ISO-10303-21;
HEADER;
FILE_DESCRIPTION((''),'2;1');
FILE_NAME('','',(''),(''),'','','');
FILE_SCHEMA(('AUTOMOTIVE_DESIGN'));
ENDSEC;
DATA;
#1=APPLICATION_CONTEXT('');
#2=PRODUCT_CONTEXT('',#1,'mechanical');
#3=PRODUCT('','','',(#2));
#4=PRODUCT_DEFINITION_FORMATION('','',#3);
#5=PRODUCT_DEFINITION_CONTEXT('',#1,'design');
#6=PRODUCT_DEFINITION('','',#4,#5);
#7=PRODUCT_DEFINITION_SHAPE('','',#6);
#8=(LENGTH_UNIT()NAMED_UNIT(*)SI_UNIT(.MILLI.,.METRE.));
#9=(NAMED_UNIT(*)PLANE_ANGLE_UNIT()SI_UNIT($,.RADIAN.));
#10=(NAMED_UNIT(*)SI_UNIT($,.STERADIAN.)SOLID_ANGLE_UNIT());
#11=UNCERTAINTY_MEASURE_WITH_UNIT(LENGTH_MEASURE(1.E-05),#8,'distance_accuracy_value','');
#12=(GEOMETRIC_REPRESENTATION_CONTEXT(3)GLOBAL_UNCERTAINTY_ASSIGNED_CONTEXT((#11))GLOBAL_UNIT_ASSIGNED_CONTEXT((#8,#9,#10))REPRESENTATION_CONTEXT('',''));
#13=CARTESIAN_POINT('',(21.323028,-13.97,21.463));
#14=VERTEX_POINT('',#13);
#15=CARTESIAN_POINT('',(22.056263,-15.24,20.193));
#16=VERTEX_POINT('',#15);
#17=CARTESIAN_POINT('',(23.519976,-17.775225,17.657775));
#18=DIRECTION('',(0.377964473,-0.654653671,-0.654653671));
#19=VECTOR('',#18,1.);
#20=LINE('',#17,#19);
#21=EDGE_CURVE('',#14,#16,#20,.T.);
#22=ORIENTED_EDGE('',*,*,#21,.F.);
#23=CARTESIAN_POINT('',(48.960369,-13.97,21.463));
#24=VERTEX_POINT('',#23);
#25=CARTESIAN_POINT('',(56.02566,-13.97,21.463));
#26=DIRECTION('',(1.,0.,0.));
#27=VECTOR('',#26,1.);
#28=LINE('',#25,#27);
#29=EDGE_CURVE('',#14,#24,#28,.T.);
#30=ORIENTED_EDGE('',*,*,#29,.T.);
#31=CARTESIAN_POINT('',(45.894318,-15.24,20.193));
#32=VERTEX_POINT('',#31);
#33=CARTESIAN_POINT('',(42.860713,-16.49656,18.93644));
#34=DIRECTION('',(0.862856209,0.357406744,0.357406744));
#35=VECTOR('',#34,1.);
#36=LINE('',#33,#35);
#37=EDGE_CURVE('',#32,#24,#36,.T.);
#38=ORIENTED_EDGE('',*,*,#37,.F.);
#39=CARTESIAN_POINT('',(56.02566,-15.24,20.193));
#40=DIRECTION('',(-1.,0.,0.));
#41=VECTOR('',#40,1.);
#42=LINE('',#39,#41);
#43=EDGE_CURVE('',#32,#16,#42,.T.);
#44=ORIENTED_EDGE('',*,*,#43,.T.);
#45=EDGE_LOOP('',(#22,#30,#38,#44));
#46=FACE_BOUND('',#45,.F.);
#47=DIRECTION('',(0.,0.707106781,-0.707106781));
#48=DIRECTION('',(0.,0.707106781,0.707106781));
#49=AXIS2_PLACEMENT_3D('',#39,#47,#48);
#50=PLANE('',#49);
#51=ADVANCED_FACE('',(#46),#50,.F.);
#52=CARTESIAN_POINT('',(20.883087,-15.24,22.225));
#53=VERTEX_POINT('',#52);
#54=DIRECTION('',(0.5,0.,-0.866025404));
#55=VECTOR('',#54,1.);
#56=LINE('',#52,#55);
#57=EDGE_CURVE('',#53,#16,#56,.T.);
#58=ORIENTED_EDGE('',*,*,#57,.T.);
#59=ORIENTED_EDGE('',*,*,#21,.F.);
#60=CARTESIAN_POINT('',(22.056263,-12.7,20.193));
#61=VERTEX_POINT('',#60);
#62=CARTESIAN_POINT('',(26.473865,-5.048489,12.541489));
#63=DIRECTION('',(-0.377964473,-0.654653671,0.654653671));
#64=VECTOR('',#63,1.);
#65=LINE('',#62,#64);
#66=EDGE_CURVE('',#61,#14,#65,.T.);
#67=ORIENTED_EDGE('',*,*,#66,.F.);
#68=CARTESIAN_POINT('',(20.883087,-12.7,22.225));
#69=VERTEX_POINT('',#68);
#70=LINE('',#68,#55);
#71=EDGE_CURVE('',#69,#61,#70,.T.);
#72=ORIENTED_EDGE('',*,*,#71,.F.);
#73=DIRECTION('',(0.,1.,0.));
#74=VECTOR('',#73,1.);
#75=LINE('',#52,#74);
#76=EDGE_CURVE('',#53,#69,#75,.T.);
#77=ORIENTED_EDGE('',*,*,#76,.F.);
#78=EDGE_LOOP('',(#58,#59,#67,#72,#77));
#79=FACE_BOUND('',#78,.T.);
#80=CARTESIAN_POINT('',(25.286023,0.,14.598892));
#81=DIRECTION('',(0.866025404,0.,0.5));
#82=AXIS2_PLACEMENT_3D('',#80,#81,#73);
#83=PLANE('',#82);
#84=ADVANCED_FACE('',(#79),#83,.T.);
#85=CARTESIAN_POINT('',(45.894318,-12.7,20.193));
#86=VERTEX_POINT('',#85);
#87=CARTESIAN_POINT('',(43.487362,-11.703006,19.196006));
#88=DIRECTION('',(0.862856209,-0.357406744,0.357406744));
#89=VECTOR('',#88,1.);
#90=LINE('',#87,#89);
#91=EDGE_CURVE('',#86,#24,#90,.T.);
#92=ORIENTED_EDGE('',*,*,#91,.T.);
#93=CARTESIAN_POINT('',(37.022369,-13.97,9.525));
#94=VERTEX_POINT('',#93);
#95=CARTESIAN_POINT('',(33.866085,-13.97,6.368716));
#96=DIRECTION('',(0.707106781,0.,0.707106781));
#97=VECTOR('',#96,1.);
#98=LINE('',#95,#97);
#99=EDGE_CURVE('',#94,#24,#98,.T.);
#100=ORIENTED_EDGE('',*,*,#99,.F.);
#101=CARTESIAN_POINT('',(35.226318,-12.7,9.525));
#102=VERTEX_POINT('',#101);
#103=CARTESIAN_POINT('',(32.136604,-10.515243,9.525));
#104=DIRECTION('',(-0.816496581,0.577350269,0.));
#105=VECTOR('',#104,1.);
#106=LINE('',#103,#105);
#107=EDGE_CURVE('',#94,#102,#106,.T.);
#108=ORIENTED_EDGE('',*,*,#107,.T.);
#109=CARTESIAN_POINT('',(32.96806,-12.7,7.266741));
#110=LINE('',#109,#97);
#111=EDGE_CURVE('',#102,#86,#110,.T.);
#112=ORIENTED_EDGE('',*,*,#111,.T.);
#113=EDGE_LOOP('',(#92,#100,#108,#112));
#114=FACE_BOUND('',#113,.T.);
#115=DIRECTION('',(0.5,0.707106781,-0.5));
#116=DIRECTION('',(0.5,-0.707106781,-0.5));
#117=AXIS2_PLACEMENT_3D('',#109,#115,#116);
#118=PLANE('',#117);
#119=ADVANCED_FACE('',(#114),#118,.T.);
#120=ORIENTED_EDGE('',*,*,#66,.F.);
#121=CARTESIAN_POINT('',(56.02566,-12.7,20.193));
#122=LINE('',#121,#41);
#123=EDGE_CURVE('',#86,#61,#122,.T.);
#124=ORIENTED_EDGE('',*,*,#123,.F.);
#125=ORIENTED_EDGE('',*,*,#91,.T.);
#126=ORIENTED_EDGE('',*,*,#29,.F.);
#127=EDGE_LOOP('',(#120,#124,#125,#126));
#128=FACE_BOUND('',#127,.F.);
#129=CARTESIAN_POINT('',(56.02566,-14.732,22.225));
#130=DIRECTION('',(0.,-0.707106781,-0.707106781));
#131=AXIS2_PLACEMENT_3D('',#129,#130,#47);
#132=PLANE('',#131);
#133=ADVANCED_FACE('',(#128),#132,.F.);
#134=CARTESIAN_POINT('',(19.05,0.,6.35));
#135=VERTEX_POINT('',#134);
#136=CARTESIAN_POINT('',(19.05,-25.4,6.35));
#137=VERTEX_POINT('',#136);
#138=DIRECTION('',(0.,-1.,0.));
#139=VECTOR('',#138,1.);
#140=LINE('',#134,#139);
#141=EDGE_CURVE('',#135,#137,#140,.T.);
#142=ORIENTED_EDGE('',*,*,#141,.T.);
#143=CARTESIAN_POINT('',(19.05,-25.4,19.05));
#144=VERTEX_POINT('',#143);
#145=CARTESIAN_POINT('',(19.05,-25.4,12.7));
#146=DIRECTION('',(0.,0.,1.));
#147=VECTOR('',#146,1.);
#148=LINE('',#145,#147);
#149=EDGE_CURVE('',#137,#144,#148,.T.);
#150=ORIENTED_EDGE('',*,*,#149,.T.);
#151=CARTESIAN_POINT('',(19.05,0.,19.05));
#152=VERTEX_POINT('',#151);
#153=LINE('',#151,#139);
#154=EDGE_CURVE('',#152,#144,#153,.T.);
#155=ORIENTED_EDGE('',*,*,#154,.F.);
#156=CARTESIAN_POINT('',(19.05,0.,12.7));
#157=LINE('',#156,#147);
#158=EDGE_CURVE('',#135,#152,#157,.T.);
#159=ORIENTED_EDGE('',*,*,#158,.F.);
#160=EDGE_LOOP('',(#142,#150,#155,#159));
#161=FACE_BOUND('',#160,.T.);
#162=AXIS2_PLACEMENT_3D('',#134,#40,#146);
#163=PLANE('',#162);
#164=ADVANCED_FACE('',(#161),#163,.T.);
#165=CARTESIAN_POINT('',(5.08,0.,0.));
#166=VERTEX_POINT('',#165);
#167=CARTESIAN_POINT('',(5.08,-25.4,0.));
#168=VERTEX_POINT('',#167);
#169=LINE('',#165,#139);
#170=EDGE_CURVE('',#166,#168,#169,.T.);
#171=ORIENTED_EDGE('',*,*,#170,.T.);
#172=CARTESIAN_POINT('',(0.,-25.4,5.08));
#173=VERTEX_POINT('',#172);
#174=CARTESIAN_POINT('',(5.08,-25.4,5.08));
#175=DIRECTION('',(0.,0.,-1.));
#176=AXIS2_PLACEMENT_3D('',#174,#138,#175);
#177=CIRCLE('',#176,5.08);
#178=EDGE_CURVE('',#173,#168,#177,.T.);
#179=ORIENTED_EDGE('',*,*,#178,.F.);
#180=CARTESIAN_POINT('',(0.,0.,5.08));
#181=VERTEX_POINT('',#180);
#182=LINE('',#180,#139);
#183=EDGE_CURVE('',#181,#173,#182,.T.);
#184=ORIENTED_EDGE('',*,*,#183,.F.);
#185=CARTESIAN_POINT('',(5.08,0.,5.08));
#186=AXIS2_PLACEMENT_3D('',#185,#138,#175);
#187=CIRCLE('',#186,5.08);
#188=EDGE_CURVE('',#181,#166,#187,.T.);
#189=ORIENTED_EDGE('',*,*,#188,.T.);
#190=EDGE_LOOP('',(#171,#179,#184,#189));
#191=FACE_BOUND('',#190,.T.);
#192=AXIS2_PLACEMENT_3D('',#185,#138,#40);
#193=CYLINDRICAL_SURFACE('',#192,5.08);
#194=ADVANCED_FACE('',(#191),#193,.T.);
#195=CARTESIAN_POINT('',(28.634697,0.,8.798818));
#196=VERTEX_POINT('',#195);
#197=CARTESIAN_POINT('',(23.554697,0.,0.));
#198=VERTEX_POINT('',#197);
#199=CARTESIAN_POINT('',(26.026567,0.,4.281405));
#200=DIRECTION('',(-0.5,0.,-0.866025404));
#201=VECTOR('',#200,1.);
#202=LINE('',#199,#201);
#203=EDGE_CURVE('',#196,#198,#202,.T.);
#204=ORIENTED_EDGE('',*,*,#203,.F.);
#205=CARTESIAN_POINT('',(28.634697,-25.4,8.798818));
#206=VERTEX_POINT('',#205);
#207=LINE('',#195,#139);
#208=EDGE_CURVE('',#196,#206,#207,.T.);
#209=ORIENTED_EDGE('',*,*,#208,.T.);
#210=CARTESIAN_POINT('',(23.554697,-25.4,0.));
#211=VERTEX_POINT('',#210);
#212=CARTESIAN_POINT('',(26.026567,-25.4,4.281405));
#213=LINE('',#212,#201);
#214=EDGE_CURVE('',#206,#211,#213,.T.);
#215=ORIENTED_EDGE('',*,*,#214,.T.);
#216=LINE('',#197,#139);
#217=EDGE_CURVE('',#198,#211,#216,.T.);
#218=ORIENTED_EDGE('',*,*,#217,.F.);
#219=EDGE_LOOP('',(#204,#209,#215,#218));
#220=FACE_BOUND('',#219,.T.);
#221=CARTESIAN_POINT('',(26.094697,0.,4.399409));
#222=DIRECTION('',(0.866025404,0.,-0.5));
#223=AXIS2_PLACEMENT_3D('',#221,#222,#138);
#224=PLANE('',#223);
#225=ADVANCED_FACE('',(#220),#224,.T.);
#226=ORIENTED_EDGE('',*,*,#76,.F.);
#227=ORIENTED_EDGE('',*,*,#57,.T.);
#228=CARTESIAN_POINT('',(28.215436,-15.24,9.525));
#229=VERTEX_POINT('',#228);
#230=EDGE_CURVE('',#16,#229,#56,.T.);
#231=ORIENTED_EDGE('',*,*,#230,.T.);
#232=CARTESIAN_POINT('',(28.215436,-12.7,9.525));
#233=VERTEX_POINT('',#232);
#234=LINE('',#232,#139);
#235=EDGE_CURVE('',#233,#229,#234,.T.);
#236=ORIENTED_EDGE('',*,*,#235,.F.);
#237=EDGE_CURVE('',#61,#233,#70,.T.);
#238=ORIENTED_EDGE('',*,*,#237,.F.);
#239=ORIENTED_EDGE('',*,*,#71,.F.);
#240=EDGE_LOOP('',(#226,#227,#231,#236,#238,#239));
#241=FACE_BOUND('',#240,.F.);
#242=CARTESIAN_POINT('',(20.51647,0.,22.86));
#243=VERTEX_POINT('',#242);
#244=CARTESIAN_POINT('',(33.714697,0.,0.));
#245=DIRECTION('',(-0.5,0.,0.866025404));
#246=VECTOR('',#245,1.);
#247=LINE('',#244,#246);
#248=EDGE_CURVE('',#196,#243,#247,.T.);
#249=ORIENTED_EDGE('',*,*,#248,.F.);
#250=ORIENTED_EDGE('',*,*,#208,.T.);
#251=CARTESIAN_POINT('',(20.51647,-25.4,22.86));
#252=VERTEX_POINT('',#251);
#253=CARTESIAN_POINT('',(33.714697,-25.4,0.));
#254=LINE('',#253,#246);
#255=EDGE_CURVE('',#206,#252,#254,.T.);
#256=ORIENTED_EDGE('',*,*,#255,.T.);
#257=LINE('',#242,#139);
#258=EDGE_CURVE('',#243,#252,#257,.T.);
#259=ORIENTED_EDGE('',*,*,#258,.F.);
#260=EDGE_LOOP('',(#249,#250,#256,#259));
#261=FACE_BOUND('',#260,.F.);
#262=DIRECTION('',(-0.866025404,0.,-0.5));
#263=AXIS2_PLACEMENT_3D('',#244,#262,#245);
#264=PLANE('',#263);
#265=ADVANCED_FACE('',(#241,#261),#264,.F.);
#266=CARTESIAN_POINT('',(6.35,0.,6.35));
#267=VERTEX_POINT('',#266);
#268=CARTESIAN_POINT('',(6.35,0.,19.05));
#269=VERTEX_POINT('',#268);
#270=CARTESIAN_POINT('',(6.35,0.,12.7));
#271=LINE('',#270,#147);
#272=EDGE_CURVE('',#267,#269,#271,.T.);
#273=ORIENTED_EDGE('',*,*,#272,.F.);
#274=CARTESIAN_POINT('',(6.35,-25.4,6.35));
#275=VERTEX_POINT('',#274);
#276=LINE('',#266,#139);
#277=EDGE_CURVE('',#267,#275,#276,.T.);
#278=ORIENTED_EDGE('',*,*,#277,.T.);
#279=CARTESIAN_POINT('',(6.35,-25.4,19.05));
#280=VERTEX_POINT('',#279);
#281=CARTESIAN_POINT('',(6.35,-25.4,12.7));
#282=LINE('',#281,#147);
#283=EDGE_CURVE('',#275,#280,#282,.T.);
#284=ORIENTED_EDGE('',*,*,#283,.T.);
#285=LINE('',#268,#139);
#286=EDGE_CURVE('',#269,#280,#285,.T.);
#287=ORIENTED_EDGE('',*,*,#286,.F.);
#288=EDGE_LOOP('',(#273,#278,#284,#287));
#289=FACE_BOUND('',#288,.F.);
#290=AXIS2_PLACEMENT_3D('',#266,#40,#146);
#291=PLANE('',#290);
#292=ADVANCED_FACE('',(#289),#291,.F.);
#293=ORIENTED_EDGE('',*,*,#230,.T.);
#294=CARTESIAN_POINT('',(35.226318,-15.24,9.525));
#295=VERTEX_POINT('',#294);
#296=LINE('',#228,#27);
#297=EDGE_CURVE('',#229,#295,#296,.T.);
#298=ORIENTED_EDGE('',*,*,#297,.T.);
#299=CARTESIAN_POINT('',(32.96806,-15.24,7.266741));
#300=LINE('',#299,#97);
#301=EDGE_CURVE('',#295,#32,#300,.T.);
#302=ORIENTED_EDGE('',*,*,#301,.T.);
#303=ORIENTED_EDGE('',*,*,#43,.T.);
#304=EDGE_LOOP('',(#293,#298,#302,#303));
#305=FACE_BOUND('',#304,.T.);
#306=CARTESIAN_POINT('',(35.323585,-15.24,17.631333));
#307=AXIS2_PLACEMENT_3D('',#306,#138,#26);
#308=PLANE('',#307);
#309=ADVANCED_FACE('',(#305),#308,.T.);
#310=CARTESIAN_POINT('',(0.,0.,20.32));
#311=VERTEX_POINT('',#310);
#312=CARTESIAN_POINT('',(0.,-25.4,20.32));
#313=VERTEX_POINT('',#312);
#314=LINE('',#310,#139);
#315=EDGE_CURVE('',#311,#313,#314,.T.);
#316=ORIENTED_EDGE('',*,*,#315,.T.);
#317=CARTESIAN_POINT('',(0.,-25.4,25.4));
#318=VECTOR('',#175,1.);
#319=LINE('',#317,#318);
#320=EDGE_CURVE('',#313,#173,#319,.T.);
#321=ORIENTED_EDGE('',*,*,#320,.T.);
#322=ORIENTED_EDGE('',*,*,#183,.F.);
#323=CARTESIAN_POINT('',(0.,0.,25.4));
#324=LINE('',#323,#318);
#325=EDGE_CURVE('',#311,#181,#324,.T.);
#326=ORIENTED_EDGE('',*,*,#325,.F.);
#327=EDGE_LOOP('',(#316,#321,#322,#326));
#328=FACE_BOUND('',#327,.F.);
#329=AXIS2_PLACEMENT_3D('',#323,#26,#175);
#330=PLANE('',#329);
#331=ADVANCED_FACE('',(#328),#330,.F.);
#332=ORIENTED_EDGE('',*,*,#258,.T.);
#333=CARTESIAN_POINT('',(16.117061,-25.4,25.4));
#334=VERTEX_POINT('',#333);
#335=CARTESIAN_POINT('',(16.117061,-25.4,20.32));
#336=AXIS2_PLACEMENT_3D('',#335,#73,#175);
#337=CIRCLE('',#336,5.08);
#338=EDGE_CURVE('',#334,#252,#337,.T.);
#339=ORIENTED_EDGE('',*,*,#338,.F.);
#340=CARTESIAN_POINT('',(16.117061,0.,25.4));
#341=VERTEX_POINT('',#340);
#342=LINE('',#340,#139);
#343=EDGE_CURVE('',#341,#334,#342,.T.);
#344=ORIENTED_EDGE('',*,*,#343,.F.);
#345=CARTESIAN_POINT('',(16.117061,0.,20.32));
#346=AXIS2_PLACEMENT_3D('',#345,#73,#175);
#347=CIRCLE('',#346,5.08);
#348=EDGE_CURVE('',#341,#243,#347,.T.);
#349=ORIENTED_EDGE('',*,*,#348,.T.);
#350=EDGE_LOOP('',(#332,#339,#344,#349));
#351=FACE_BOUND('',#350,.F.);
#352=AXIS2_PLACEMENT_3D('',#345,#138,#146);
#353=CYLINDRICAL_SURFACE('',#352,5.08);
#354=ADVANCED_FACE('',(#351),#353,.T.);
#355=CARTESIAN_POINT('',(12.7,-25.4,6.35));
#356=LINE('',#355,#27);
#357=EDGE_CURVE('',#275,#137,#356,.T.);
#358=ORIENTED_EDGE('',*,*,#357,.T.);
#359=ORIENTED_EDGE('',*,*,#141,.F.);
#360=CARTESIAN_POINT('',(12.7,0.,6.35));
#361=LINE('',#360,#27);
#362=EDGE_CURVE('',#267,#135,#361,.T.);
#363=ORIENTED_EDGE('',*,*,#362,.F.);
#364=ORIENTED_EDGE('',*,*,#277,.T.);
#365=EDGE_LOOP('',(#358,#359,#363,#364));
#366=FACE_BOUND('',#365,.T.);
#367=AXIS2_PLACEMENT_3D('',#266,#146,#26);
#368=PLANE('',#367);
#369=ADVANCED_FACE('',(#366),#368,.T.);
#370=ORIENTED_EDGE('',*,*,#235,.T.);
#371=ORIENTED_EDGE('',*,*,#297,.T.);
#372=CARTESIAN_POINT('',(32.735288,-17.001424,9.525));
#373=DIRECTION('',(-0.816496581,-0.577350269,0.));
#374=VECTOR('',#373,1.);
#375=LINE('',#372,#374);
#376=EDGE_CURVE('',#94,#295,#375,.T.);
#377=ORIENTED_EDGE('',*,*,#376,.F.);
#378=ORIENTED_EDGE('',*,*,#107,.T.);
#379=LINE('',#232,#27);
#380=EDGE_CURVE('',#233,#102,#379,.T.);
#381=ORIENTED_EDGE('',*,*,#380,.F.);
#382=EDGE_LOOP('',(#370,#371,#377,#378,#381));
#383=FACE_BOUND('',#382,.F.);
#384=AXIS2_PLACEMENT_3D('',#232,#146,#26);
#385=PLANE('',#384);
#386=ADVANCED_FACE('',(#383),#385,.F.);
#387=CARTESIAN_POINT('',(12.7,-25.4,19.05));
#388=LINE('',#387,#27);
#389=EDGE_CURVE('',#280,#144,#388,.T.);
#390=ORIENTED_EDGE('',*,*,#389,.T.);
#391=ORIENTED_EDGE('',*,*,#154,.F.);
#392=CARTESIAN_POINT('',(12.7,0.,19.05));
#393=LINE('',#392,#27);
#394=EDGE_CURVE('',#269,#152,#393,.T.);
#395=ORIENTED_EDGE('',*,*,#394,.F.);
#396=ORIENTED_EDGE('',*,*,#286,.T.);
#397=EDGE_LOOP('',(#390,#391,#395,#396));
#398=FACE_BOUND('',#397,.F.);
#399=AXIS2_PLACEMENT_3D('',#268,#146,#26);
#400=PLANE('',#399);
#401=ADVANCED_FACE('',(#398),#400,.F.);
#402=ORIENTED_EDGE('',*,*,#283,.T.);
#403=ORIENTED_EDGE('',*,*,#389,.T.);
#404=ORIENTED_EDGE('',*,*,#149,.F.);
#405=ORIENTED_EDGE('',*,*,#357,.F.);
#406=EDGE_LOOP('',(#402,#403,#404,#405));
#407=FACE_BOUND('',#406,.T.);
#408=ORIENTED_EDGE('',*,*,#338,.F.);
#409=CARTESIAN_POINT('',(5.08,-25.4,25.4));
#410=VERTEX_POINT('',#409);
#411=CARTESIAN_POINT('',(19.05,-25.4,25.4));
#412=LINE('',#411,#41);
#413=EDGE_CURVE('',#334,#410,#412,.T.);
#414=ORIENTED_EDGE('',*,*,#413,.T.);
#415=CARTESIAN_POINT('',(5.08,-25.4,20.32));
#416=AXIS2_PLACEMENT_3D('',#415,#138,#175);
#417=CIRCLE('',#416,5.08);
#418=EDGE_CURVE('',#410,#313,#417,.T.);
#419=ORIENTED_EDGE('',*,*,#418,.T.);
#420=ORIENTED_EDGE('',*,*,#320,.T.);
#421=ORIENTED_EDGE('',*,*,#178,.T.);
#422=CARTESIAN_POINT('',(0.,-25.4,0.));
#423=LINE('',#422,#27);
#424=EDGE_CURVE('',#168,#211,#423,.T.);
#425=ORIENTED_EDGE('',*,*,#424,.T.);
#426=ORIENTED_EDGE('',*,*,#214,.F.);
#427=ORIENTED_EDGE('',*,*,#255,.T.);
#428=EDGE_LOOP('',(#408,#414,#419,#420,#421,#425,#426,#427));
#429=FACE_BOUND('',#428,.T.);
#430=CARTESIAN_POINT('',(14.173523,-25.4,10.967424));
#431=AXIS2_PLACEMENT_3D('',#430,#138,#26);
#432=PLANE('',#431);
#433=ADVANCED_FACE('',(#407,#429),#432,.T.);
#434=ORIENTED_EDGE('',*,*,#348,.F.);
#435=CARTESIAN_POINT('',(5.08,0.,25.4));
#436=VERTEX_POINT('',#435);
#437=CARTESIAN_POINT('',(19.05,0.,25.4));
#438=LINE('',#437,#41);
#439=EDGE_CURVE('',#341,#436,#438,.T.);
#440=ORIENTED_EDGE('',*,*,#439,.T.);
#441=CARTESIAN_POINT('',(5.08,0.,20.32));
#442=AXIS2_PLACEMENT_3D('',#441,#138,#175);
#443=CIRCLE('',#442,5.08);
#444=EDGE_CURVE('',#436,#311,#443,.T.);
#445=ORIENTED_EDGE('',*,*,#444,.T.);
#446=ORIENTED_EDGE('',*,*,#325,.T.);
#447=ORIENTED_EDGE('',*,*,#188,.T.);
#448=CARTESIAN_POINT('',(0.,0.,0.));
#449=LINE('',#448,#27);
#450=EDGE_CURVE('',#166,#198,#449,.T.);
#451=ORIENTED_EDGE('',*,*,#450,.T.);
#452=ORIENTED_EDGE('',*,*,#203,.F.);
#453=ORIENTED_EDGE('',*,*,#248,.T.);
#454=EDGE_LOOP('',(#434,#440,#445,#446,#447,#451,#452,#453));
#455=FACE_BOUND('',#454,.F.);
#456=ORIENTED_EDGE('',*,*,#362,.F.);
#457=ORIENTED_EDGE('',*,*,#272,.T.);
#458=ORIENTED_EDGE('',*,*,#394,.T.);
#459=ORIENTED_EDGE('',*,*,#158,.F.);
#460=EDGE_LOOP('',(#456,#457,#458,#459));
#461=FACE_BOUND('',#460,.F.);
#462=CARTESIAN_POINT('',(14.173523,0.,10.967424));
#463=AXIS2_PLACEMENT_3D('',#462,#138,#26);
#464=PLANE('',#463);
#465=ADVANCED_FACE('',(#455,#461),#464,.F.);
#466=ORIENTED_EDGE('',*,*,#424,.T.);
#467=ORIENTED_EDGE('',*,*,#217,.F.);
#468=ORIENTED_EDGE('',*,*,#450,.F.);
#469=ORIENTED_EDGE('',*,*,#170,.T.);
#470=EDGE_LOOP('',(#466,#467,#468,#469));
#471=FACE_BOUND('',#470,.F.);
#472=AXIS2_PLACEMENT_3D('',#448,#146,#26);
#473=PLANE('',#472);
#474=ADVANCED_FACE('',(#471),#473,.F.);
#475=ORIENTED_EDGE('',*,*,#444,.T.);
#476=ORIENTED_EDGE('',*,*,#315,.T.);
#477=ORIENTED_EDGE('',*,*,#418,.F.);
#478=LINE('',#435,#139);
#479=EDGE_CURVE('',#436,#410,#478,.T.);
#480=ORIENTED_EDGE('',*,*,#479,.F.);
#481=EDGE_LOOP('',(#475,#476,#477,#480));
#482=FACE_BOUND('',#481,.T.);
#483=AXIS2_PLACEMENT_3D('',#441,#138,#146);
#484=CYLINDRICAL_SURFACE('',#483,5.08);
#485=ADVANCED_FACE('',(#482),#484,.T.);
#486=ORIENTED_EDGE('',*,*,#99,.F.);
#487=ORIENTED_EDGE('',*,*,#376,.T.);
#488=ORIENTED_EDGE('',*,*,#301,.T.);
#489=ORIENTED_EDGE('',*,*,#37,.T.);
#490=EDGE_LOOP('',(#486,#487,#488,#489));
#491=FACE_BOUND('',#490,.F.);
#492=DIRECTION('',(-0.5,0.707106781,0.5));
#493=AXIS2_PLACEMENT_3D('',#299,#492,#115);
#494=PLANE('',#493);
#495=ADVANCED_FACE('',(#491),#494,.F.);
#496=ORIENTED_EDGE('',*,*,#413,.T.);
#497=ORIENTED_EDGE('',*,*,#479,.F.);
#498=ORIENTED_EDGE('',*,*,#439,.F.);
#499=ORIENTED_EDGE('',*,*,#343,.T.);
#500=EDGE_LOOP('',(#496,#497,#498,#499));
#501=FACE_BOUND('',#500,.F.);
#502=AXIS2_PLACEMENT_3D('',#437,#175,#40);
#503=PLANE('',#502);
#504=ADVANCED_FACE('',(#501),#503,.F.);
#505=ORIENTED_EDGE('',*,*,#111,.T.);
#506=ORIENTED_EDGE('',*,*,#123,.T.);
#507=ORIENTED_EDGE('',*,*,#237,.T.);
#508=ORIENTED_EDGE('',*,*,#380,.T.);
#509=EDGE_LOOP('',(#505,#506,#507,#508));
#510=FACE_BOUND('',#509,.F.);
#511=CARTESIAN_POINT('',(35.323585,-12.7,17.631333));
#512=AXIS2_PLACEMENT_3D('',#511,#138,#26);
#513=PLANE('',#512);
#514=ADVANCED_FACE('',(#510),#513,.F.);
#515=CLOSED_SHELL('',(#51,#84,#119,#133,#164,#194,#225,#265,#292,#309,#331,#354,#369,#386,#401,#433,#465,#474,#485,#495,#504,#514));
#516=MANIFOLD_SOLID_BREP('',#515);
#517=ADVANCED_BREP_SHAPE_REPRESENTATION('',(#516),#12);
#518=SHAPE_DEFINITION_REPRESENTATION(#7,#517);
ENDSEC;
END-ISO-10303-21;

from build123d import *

# Parameters (mm, degrees)
F0_W        = 12.7
F0_H        = 12.7
F1_DEPTH    = 25.4
F4_DEPTH    = 2.54
F5_R        = 5.08
F6_SIZE     = 10.16
F7_T4_DEPTH = 40.3682325584
F7_T9_DEPTH = 40.3682325584
F8_T1_DEPTH = 25.5381499465


# Not quite as in the source:
# - a fillet or chamfer that OpenCascade refuses, or shapes differently, is made with other operations: its cross-section is extruded or revolved along the edge and cut away or added
# - a feature names something its author has since deleted; it is built from what else it names


with BuildPart() as f1:
    # F0 (on Front) → F1 (new body)
    with BuildSketch(Plane.XZ):
        Polygon((19.05, 25.4), (0, 25.4), (0, 0), (33.7146968374, 0), align=None)
        with Locations((12.7, 12.7)):
            Rectangle(F0_W, F0_H, mode=Mode.SUBTRACT)
    extrude(amount=F1_DEPTH)

    # F3 (on mid) → F4 (join)
    with BuildSketch(Plane.XZ.offset(12.7)):
        Polygon((50.8, 22.225), (20.8830871047, 22.225), (28.2154355234, 9.525), (38.1, 9.525), align=None)
    extrude(amount=F4_DEPTH)

    # F5
    f5_edges = [f1.edges().sort_by_distance(p)[0] for p in [
        (0, -12.7, 0),
        (0, -12.7, 25.4),
        (19.05, -12.7, 25.4),
    ]]
    fillet(f5_edges, radius=F5_R)

    # F6
    f6_edges = [f1.edges().sort_by_distance(p)[0] for p in [
        (33.714697, -12.7, 0),
    ]]
    chamfer(f6_edges, length=F6_SIZE)

    # F7: chamfer of 2.032 on 2 edges, made by hand


with BuildPart() as f7_tool2:
    # F7_s3 → F7_t4 (new body)
    with BuildSketch(Plane.YZ.offset(56.0256598315)):
        Polygon((-14.732, 22.225), (-12.7, 20.193), (-12.7, 22.225), align=None)
    extrude(amount=-F7_T4_DEPTH)

    split(bisect_by=Plane(origin=(25.2860226281, 0, 14.598891971), x_dir=(0, 1, 0), z_dir=(0.8660254038, 0, 0.5)), keep=Keep.TOP)


with BuildPart() as f1_1:
    add(f1.part)

    # F7_t1: cut F7_tool2
    add(f7_tool2.part, mode=Mode.SUBTRACT)


with BuildPart() as f7_tool7:
    # F7_s8 → F7_t9 (new body)
    with BuildSketch(Plane.YZ.offset(56.0256598315)):
        Polygon((-15.24, 20.193), (-13.208, 22.225), (-15.24, 22.225), align=None)
    extrude(amount=-F7_T9_DEPTH)

    split(bisect_by=Plane(origin=(25.2860226281, 0, 14.598891971), x_dir=(0, 1, 0), z_dir=(0.8660254038, 0, 0.5)), keep=Keep.TOP)


with BuildPart() as f1_2:
    add(f1_1.part)

    # F7_t6: cut F7_tool7
    add(f7_tool7.part, mode=Mode.SUBTRACT)

    # F8: chamfer of 2.032 on 2 edges, made by hand

    # F8_s2 → F8_t1 (cut)
    with BuildSketch(Plane(origin=(20.1174004969, 0, 20.1174004969), x_dir=(0, 1, 0), z_dir=(0.7071067812, 0, 0.7071067812))):
        Polygon((-12.7, -18.1735762724), (-14.732, -20.2055762724), (-12.7, -20.2055762724), align=None)
        Polygon((-15.24, -18.1735762724), (-13.208, -20.2055762724), (-15.24, -20.2055762724), align=None)
    extrude(amount=F8_T1_DEPTH, mode=Mode.SUBTRACT)


solid = f1_2.part
